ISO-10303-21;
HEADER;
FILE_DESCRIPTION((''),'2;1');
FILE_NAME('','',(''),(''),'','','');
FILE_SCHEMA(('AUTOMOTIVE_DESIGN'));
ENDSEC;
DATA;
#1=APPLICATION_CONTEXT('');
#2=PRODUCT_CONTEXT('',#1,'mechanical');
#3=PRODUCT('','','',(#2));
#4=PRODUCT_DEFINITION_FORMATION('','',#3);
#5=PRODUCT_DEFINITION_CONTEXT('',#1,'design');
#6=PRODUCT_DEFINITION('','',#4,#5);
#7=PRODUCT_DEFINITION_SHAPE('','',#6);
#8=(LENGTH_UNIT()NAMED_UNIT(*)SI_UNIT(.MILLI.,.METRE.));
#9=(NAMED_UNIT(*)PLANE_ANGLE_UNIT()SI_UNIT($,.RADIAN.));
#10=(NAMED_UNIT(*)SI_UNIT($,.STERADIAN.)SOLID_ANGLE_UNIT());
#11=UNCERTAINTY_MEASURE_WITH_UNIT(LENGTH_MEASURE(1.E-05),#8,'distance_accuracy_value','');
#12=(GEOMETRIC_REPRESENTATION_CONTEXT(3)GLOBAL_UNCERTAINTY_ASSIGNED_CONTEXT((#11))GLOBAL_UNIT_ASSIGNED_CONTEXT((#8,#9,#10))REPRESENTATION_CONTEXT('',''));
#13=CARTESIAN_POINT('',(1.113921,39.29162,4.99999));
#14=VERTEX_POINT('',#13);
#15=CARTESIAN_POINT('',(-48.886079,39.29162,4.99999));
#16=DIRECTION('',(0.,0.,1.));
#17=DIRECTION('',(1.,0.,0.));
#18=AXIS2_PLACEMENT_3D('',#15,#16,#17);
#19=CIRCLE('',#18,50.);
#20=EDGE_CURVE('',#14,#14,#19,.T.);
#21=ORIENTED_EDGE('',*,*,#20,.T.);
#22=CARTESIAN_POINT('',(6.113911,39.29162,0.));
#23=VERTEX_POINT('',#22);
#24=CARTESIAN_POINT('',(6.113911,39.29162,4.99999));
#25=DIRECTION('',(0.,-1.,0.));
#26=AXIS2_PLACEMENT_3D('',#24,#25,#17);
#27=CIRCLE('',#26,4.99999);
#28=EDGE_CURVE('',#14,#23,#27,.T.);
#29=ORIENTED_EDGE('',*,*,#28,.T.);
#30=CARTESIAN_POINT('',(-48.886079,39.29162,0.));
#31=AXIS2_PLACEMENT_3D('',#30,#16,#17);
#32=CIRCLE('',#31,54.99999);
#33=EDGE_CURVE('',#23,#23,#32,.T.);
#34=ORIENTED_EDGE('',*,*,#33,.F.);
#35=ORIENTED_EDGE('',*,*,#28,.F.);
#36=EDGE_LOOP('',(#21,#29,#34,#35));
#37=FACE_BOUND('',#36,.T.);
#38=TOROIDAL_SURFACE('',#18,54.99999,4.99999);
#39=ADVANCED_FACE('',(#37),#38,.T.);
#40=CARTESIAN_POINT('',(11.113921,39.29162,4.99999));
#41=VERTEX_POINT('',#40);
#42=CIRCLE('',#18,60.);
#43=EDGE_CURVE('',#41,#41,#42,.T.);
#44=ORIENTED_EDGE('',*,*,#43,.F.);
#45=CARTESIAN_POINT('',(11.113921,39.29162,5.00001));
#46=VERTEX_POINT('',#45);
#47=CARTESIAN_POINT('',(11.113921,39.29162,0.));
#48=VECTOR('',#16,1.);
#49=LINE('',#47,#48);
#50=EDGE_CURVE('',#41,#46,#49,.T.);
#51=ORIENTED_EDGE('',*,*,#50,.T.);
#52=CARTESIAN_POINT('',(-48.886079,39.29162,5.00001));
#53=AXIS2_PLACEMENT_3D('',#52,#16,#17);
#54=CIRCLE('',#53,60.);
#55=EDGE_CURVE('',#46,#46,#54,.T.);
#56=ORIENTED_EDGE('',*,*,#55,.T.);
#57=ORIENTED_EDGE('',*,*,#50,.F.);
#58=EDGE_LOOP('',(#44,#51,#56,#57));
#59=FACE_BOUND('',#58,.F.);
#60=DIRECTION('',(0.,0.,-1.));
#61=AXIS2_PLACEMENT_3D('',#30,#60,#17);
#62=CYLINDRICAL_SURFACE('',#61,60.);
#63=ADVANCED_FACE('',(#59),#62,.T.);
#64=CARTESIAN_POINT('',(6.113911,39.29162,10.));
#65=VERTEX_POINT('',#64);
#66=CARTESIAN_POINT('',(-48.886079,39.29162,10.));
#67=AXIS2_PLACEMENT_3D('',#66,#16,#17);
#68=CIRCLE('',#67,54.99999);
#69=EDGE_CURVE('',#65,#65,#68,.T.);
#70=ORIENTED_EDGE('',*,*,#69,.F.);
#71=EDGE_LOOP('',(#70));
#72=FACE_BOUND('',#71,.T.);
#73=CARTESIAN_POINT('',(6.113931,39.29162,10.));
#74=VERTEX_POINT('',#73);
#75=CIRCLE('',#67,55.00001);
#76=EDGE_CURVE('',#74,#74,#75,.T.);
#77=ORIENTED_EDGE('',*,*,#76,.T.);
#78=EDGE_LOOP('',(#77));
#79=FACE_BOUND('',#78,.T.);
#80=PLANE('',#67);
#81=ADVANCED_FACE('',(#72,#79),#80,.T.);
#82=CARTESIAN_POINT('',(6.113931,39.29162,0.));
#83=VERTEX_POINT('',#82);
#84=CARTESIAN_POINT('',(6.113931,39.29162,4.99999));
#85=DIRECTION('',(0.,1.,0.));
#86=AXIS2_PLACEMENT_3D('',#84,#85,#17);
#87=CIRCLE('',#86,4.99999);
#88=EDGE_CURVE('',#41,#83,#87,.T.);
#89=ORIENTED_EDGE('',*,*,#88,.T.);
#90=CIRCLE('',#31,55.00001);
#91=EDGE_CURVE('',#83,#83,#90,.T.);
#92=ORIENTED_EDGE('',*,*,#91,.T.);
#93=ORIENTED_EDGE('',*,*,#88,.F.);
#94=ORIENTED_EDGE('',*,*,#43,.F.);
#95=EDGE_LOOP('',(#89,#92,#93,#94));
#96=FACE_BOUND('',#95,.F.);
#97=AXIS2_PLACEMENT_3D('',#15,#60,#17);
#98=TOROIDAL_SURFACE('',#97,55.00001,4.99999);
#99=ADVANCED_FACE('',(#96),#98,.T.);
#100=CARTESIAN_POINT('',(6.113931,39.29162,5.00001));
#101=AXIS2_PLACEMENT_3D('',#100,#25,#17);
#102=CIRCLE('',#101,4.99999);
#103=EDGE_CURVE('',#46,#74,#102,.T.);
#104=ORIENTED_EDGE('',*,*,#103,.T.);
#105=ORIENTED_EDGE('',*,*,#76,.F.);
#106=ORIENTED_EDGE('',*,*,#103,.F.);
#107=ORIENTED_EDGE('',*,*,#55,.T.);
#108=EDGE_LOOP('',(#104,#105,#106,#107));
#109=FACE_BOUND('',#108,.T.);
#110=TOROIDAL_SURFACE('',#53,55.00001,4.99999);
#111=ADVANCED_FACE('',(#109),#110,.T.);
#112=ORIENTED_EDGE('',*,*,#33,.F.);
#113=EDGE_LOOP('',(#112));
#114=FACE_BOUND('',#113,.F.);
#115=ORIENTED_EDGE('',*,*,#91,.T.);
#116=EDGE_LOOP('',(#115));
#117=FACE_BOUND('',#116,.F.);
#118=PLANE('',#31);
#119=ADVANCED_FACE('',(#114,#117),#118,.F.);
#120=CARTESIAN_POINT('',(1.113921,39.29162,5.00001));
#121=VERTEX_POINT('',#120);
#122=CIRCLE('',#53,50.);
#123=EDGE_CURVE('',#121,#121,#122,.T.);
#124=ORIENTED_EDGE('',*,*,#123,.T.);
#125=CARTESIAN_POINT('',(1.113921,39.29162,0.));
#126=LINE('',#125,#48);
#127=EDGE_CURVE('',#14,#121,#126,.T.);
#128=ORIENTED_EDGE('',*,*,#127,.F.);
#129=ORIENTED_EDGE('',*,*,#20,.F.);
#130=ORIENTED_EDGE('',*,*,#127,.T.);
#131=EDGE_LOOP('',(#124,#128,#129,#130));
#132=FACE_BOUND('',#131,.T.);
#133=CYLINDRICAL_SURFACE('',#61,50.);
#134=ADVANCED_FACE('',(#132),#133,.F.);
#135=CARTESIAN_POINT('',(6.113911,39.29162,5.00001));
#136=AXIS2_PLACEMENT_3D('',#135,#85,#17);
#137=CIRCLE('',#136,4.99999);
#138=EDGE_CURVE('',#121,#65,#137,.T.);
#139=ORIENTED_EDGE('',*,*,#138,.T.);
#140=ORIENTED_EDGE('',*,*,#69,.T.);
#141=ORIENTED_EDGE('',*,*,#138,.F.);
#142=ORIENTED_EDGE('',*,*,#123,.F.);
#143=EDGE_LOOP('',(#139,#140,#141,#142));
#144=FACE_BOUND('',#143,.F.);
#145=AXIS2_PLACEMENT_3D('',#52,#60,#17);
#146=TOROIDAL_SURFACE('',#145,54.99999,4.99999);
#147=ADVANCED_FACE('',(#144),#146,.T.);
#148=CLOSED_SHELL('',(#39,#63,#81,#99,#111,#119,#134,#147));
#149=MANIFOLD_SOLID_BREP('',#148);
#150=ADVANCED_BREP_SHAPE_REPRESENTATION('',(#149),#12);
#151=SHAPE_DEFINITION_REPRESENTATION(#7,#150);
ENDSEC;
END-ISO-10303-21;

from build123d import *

# Parameters (mm, degrees)
F0_R     = 60
F0_R_2   = 50
F1_DEPTH = 10
F2_R     = 4.99999


# Not quite as in the source:
# - a fillet or chamfer is up to 0.001 mm smaller than in the source, because OpenCascade refuses the exact size


with BuildPart() as f1:
    # F0 (on Top) → F1 (new body)
    with BuildSketch(Plane.XY):
        with Locations((-48.8860793412, 39.2916202545)):
            Circle(F0_R)
        with Locations((-48.8860793412, 39.2916202545)):
            Circle(F0_R_2, mode=Mode.SUBTRACT)
    extrude(amount=F1_DEPTH)

    # F2 (radius 5 in the source; OpenCascade refuses exactly that, so slightly less here)
    f2_edges = [f1.edges().sort_by_distance(p)[0] for p in [
        (-108.886079, 39.29162, 10),
        (-108.886079, 39.29162, 0),
        (-98.886079, 39.29162, 10),
        (-98.886079, 39.29162, 0),
    ]]
    fillet(f2_edges, radius=F2_R)


solid = f1.part
